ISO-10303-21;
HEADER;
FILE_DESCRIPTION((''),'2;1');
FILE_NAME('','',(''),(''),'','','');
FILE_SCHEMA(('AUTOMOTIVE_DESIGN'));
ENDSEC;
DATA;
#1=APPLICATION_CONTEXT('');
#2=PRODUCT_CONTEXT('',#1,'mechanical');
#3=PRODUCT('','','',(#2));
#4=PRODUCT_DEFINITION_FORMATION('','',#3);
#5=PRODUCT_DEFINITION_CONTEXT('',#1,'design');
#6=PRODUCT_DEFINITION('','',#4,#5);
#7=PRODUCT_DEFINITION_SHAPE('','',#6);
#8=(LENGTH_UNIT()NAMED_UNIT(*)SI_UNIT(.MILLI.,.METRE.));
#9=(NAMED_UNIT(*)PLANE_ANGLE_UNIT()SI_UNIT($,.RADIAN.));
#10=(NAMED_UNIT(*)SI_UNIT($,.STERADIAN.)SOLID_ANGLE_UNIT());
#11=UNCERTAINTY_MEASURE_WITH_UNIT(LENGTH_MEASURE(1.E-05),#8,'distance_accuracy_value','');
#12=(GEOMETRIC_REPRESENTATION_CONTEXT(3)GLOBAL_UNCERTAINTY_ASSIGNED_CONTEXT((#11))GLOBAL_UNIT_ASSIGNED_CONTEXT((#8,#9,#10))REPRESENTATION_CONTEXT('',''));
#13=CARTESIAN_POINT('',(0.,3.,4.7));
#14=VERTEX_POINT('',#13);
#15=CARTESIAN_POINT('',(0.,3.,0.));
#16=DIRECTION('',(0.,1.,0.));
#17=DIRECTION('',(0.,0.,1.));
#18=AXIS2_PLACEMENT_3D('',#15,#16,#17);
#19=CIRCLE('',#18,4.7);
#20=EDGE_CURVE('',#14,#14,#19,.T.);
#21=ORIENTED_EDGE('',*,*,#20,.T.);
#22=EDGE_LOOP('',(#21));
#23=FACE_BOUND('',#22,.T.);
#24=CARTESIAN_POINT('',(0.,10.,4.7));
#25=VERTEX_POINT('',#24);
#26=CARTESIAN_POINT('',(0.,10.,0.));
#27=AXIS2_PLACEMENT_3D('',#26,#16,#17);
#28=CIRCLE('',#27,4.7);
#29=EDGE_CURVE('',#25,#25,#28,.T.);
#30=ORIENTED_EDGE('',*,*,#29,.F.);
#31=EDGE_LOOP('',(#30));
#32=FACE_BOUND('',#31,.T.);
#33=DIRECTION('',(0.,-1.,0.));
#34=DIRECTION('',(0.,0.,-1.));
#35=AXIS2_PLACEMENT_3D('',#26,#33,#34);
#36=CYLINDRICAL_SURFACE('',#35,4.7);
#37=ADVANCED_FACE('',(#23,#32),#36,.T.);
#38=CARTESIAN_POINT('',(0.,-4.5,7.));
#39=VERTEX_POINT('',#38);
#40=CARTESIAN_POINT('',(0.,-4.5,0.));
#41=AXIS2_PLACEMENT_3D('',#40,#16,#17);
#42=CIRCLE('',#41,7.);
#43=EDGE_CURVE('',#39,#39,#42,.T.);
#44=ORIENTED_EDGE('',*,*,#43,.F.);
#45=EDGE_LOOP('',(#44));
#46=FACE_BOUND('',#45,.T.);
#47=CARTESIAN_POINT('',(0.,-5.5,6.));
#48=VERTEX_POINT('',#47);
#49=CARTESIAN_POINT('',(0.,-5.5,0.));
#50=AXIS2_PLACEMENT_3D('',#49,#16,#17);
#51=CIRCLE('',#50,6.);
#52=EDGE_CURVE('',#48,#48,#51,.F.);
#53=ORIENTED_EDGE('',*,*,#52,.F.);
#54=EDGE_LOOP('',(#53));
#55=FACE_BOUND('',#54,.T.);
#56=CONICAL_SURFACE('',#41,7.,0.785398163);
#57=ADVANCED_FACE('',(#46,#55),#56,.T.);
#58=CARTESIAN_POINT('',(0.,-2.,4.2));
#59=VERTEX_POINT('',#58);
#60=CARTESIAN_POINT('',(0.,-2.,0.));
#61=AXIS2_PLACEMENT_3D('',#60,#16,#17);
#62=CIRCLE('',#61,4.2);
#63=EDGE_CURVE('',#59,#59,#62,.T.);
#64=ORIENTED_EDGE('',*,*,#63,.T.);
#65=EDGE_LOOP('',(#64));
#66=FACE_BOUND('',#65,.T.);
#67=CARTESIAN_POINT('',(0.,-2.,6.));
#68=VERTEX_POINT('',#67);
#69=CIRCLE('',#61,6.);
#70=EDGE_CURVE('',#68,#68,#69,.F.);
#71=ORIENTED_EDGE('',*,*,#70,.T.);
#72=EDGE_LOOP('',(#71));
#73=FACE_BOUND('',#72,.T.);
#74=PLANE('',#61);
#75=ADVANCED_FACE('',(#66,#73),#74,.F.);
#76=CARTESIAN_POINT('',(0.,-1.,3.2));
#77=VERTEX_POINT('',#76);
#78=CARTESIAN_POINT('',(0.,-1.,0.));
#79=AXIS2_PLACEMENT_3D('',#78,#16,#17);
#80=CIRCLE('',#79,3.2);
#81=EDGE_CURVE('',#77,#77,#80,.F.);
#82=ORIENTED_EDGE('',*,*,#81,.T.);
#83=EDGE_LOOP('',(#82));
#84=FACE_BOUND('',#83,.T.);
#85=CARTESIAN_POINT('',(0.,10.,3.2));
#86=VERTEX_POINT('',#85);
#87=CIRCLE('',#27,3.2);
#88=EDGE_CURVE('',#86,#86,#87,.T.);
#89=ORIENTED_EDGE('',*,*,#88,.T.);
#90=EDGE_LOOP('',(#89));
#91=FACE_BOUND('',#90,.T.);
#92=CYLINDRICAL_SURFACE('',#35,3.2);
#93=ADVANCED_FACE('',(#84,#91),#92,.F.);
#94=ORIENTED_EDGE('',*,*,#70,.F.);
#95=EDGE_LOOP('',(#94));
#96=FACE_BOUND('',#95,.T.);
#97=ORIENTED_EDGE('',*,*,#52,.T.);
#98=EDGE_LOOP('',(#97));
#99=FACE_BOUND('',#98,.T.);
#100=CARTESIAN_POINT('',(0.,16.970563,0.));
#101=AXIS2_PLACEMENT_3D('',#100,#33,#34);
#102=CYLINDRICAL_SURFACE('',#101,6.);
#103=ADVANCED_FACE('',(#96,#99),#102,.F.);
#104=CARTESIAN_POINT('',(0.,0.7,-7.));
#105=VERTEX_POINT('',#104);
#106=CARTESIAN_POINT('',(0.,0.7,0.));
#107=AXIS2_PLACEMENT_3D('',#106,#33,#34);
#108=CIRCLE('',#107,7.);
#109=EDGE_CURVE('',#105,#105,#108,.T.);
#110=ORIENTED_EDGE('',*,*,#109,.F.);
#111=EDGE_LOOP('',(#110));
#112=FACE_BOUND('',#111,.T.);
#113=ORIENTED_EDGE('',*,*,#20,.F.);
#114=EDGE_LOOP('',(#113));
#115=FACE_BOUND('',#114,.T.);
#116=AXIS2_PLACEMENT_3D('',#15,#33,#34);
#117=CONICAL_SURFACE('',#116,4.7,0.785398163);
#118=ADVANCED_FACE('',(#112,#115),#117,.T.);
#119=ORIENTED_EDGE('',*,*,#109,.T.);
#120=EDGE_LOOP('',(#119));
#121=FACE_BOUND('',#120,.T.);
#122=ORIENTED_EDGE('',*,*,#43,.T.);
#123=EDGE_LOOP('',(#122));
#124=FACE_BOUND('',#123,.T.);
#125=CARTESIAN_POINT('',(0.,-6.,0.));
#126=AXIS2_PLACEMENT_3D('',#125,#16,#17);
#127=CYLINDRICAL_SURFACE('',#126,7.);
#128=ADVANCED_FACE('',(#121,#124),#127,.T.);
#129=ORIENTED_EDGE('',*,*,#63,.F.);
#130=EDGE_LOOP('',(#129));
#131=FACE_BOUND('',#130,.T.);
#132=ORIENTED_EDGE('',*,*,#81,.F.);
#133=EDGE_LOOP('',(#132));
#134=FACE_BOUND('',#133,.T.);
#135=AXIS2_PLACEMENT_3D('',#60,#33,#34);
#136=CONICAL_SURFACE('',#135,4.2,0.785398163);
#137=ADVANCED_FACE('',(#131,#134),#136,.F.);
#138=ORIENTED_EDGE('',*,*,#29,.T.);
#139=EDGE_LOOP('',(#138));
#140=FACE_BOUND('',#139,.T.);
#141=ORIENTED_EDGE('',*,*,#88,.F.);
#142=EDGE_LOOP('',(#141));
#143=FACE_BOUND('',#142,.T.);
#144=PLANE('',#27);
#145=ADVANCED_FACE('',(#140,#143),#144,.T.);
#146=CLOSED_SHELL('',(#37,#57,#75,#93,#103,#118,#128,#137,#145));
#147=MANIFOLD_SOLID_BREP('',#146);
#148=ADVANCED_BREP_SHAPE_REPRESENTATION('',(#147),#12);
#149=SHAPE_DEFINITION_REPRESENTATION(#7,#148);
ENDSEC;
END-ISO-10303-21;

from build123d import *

# Parameters (mm, degrees)
SKETCH1_R           = 4.7
SKETCH1_R_2         = 3.2
BOSS_EXTRUDE1_DEPTH = 10
SKETCH2_R           = 7
BOSS_EXTRUDE2_DEPTH = 6
SKETCH3_R           = 6
CUT_EXTRUDE1_DEPTH  = 4
SKETCH4_R           = 3.2
CUT_EXTRUDE2_DEPTH  = 15.071247279
CHAMFER2_SIZE       = 1.5
CHAMFER4_SIZE       = 3
CHAMFER5_SIZE       = 1


with BuildPart() as part:
    # Sketch1 → Boss-Extrude1 (new body)
    with BuildSketch(Plane(origin=(0, 0, 0), x_dir=(1, 0, 0), z_dir=(0, 1, 0))):
        with Locations(Location((0, 0, 0), (0, 0, 270))):
            Circle(SKETCH1_R)
        with Locations(Location((0, 0, 0), (0, 0, 270))):
            Circle(SKETCH1_R_2, mode=Mode.SUBTRACT)
    extrude(amount=BOSS_EXTRUDE1_DEPTH)

    # Sketch2 → Boss-Extrude2 (add)
    with BuildSketch(Plane(origin=(0, 0, 0), x_dir=(1, 0, 0), z_dir=(0, 1, 0))):
        with Locations(Location((0, 0, 0), (0, 0, 270))):
            Circle(SKETCH2_R)
    extrude(amount=-BOSS_EXTRUDE2_DEPTH)

    # Sketch3 → Cut-Extrude1 (cut)
    with BuildSketch(Plane.XZ.offset(6)):
        with Locations(Location((0, 0, 0), (0, 0, 270))):
            Circle(SKETCH3_R)
    extrude(amount=-CUT_EXTRUDE1_DEPTH, mode=Mode.SUBTRACT)

    # Sketch4 → Cut-Extrude2 (cut, through all)
    with BuildSketch(Plane(origin=(0, 0, 0), x_dir=(1, 0, 0), z_dir=(0, 1, 0))):
        with Locations(Location((0, 0, 0), (0, 0, 270))):
            Circle(SKETCH4_R)
    extrude(amount=-CUT_EXTRUDE2_DEPTH, mode=Mode.SUBTRACT)

    # Chamfer2
    # the kernel refuses this chamfer: 1.5 mm, written as the material it takes off along each edge
    with BuildSketch(Plane(origin=(0, -6, 0), x_dir=(0, 0, 1), z_dir=(-1, 0, 0))) as chamfer2_piece_1:
        Polygon((7, CHAMFER2_SIZE), (7 - CHAMFER2_SIZE, 0), (7, 0), align=None)
    revolve(axis=Axis((0, -6, 0), (0, 1, 0)), mode=Mode.SUBTRACT)

    # Chamfer4
    # the kernel refuses this chamfer: 3 mm, written as the material it adds along each edge
    with BuildSketch(Plane(origin=(0, 0, 0), x_dir=(0, 0, 1), z_dir=(-1, 0, 0))) as chamfer4_piece_1_section:
        Polygon((4.7 + CHAMFER4_SIZE, 0), (4.7, CHAMFER4_SIZE), (4.7, 0), align=None)
    chamfer4_piece_1 = revolve(axis=Axis((0, 0, 0), (0, 1, 0)), mode=Mode.PRIVATE)
    chamfer4_piece_1 = chamfer4_piece_1 & Plane(origin=(0, 1.853894362, 0), x_dir=(0, 0, 1), z_dir=(0, 1, 0)) * Cylinder(7, 31, mode=Mode.PRIVATE)
    add(chamfer4_piece_1)

    # Chamfer5
    chamfer5_edges = [part.edges().sort_by_distance(p)[0] for p in [
        (0, -2, -3.2),
    ]]
    chamfer(chamfer5_edges, length=CHAMFER5_SIZE)


solid = part.part
